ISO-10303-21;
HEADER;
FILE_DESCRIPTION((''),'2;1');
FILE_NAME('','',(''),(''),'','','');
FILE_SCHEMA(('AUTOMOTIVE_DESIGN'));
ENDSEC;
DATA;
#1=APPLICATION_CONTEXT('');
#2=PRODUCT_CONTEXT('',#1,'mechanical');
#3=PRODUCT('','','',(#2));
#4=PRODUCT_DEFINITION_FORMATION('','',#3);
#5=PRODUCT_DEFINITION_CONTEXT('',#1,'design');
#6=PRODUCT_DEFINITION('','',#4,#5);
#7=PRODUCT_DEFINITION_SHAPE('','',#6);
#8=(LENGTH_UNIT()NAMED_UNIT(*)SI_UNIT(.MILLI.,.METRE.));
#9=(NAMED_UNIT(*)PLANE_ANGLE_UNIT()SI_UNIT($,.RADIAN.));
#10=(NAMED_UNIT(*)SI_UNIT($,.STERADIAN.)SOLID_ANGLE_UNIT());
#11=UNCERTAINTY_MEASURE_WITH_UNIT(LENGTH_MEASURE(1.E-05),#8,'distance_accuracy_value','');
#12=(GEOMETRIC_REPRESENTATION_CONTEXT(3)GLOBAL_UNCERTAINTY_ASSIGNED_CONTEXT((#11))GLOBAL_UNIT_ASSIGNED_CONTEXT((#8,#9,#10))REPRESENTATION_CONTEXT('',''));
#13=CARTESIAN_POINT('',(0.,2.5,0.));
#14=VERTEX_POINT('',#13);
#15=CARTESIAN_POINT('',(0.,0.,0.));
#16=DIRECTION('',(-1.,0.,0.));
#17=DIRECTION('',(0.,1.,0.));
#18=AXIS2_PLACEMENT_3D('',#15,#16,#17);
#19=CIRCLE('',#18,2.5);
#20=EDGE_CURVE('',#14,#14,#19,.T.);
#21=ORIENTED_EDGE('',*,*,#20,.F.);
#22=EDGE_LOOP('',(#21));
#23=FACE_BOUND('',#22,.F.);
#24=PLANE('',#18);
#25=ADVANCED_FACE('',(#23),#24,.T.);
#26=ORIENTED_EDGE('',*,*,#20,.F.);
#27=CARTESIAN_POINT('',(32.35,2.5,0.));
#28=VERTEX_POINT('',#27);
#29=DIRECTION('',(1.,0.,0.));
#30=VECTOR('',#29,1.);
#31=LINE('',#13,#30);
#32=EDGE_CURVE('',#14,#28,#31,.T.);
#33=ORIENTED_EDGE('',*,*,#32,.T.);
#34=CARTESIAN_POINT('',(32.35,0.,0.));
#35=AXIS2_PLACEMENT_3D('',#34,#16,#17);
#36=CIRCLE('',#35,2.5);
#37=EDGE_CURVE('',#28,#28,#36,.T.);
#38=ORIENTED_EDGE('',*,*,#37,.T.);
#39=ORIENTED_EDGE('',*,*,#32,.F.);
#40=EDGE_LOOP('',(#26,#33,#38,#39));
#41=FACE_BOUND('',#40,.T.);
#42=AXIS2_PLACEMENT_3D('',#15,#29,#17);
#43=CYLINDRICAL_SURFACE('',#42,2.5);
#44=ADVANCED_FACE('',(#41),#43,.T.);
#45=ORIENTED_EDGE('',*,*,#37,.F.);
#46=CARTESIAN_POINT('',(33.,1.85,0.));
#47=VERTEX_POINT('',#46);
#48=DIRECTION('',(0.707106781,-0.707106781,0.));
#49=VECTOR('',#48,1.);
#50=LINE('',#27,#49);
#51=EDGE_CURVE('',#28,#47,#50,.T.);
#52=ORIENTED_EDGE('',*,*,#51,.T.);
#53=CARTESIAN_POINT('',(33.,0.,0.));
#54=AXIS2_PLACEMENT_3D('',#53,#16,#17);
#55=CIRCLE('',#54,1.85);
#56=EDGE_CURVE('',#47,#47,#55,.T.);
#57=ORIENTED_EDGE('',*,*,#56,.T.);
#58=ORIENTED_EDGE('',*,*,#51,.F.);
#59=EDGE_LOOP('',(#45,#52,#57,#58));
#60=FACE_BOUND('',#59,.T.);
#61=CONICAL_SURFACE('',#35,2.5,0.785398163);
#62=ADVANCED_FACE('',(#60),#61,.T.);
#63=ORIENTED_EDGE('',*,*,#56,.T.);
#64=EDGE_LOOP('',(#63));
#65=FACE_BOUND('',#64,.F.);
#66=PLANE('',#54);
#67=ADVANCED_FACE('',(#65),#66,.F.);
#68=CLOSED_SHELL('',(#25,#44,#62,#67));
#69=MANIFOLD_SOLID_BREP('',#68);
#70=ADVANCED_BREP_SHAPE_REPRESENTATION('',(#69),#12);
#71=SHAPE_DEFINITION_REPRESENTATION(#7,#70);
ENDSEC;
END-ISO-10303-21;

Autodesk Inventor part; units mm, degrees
ref_plane "YZ Plane" through (0, 0, 0) normal (1, 0, 0) x (0, 1, 0)
ref_plane "XZ Plane" through (0, 0, 0) normal (0, 1, 0) x (-1, 0, 0)
ref_plane "XY Plane" through (0, 0, 0) normal (0, 0, 1) x (1, 0, 0)
sketch "Sketch1" plane through (0, 0, 0) normal (0, 0, 1) x (1, 0, 0)
  line L0 (0, 0) -> (0, 2.5)
  line L1 (0, 2.5) -> (33, 2.5)
  line L2 (33, 2.5) -> (33, 0)
  line L3 (33, 0) -> (0, 0)
  dimension "d0" = 33
  dimension "d1" = 5
revolve "Revolution1" add sketch "Sketch1" angle 360 about axis through (33, 0, 0) along (-1, 0, 0)
thread "Thread1" size "M5x0.8" class "6g" standard "ISO Metric profile" length 9
chamfer "Chamfer1" distance 0.65 angle 45 1 edges at (33, -2.5, 0)
properties part number "207 part 1"
